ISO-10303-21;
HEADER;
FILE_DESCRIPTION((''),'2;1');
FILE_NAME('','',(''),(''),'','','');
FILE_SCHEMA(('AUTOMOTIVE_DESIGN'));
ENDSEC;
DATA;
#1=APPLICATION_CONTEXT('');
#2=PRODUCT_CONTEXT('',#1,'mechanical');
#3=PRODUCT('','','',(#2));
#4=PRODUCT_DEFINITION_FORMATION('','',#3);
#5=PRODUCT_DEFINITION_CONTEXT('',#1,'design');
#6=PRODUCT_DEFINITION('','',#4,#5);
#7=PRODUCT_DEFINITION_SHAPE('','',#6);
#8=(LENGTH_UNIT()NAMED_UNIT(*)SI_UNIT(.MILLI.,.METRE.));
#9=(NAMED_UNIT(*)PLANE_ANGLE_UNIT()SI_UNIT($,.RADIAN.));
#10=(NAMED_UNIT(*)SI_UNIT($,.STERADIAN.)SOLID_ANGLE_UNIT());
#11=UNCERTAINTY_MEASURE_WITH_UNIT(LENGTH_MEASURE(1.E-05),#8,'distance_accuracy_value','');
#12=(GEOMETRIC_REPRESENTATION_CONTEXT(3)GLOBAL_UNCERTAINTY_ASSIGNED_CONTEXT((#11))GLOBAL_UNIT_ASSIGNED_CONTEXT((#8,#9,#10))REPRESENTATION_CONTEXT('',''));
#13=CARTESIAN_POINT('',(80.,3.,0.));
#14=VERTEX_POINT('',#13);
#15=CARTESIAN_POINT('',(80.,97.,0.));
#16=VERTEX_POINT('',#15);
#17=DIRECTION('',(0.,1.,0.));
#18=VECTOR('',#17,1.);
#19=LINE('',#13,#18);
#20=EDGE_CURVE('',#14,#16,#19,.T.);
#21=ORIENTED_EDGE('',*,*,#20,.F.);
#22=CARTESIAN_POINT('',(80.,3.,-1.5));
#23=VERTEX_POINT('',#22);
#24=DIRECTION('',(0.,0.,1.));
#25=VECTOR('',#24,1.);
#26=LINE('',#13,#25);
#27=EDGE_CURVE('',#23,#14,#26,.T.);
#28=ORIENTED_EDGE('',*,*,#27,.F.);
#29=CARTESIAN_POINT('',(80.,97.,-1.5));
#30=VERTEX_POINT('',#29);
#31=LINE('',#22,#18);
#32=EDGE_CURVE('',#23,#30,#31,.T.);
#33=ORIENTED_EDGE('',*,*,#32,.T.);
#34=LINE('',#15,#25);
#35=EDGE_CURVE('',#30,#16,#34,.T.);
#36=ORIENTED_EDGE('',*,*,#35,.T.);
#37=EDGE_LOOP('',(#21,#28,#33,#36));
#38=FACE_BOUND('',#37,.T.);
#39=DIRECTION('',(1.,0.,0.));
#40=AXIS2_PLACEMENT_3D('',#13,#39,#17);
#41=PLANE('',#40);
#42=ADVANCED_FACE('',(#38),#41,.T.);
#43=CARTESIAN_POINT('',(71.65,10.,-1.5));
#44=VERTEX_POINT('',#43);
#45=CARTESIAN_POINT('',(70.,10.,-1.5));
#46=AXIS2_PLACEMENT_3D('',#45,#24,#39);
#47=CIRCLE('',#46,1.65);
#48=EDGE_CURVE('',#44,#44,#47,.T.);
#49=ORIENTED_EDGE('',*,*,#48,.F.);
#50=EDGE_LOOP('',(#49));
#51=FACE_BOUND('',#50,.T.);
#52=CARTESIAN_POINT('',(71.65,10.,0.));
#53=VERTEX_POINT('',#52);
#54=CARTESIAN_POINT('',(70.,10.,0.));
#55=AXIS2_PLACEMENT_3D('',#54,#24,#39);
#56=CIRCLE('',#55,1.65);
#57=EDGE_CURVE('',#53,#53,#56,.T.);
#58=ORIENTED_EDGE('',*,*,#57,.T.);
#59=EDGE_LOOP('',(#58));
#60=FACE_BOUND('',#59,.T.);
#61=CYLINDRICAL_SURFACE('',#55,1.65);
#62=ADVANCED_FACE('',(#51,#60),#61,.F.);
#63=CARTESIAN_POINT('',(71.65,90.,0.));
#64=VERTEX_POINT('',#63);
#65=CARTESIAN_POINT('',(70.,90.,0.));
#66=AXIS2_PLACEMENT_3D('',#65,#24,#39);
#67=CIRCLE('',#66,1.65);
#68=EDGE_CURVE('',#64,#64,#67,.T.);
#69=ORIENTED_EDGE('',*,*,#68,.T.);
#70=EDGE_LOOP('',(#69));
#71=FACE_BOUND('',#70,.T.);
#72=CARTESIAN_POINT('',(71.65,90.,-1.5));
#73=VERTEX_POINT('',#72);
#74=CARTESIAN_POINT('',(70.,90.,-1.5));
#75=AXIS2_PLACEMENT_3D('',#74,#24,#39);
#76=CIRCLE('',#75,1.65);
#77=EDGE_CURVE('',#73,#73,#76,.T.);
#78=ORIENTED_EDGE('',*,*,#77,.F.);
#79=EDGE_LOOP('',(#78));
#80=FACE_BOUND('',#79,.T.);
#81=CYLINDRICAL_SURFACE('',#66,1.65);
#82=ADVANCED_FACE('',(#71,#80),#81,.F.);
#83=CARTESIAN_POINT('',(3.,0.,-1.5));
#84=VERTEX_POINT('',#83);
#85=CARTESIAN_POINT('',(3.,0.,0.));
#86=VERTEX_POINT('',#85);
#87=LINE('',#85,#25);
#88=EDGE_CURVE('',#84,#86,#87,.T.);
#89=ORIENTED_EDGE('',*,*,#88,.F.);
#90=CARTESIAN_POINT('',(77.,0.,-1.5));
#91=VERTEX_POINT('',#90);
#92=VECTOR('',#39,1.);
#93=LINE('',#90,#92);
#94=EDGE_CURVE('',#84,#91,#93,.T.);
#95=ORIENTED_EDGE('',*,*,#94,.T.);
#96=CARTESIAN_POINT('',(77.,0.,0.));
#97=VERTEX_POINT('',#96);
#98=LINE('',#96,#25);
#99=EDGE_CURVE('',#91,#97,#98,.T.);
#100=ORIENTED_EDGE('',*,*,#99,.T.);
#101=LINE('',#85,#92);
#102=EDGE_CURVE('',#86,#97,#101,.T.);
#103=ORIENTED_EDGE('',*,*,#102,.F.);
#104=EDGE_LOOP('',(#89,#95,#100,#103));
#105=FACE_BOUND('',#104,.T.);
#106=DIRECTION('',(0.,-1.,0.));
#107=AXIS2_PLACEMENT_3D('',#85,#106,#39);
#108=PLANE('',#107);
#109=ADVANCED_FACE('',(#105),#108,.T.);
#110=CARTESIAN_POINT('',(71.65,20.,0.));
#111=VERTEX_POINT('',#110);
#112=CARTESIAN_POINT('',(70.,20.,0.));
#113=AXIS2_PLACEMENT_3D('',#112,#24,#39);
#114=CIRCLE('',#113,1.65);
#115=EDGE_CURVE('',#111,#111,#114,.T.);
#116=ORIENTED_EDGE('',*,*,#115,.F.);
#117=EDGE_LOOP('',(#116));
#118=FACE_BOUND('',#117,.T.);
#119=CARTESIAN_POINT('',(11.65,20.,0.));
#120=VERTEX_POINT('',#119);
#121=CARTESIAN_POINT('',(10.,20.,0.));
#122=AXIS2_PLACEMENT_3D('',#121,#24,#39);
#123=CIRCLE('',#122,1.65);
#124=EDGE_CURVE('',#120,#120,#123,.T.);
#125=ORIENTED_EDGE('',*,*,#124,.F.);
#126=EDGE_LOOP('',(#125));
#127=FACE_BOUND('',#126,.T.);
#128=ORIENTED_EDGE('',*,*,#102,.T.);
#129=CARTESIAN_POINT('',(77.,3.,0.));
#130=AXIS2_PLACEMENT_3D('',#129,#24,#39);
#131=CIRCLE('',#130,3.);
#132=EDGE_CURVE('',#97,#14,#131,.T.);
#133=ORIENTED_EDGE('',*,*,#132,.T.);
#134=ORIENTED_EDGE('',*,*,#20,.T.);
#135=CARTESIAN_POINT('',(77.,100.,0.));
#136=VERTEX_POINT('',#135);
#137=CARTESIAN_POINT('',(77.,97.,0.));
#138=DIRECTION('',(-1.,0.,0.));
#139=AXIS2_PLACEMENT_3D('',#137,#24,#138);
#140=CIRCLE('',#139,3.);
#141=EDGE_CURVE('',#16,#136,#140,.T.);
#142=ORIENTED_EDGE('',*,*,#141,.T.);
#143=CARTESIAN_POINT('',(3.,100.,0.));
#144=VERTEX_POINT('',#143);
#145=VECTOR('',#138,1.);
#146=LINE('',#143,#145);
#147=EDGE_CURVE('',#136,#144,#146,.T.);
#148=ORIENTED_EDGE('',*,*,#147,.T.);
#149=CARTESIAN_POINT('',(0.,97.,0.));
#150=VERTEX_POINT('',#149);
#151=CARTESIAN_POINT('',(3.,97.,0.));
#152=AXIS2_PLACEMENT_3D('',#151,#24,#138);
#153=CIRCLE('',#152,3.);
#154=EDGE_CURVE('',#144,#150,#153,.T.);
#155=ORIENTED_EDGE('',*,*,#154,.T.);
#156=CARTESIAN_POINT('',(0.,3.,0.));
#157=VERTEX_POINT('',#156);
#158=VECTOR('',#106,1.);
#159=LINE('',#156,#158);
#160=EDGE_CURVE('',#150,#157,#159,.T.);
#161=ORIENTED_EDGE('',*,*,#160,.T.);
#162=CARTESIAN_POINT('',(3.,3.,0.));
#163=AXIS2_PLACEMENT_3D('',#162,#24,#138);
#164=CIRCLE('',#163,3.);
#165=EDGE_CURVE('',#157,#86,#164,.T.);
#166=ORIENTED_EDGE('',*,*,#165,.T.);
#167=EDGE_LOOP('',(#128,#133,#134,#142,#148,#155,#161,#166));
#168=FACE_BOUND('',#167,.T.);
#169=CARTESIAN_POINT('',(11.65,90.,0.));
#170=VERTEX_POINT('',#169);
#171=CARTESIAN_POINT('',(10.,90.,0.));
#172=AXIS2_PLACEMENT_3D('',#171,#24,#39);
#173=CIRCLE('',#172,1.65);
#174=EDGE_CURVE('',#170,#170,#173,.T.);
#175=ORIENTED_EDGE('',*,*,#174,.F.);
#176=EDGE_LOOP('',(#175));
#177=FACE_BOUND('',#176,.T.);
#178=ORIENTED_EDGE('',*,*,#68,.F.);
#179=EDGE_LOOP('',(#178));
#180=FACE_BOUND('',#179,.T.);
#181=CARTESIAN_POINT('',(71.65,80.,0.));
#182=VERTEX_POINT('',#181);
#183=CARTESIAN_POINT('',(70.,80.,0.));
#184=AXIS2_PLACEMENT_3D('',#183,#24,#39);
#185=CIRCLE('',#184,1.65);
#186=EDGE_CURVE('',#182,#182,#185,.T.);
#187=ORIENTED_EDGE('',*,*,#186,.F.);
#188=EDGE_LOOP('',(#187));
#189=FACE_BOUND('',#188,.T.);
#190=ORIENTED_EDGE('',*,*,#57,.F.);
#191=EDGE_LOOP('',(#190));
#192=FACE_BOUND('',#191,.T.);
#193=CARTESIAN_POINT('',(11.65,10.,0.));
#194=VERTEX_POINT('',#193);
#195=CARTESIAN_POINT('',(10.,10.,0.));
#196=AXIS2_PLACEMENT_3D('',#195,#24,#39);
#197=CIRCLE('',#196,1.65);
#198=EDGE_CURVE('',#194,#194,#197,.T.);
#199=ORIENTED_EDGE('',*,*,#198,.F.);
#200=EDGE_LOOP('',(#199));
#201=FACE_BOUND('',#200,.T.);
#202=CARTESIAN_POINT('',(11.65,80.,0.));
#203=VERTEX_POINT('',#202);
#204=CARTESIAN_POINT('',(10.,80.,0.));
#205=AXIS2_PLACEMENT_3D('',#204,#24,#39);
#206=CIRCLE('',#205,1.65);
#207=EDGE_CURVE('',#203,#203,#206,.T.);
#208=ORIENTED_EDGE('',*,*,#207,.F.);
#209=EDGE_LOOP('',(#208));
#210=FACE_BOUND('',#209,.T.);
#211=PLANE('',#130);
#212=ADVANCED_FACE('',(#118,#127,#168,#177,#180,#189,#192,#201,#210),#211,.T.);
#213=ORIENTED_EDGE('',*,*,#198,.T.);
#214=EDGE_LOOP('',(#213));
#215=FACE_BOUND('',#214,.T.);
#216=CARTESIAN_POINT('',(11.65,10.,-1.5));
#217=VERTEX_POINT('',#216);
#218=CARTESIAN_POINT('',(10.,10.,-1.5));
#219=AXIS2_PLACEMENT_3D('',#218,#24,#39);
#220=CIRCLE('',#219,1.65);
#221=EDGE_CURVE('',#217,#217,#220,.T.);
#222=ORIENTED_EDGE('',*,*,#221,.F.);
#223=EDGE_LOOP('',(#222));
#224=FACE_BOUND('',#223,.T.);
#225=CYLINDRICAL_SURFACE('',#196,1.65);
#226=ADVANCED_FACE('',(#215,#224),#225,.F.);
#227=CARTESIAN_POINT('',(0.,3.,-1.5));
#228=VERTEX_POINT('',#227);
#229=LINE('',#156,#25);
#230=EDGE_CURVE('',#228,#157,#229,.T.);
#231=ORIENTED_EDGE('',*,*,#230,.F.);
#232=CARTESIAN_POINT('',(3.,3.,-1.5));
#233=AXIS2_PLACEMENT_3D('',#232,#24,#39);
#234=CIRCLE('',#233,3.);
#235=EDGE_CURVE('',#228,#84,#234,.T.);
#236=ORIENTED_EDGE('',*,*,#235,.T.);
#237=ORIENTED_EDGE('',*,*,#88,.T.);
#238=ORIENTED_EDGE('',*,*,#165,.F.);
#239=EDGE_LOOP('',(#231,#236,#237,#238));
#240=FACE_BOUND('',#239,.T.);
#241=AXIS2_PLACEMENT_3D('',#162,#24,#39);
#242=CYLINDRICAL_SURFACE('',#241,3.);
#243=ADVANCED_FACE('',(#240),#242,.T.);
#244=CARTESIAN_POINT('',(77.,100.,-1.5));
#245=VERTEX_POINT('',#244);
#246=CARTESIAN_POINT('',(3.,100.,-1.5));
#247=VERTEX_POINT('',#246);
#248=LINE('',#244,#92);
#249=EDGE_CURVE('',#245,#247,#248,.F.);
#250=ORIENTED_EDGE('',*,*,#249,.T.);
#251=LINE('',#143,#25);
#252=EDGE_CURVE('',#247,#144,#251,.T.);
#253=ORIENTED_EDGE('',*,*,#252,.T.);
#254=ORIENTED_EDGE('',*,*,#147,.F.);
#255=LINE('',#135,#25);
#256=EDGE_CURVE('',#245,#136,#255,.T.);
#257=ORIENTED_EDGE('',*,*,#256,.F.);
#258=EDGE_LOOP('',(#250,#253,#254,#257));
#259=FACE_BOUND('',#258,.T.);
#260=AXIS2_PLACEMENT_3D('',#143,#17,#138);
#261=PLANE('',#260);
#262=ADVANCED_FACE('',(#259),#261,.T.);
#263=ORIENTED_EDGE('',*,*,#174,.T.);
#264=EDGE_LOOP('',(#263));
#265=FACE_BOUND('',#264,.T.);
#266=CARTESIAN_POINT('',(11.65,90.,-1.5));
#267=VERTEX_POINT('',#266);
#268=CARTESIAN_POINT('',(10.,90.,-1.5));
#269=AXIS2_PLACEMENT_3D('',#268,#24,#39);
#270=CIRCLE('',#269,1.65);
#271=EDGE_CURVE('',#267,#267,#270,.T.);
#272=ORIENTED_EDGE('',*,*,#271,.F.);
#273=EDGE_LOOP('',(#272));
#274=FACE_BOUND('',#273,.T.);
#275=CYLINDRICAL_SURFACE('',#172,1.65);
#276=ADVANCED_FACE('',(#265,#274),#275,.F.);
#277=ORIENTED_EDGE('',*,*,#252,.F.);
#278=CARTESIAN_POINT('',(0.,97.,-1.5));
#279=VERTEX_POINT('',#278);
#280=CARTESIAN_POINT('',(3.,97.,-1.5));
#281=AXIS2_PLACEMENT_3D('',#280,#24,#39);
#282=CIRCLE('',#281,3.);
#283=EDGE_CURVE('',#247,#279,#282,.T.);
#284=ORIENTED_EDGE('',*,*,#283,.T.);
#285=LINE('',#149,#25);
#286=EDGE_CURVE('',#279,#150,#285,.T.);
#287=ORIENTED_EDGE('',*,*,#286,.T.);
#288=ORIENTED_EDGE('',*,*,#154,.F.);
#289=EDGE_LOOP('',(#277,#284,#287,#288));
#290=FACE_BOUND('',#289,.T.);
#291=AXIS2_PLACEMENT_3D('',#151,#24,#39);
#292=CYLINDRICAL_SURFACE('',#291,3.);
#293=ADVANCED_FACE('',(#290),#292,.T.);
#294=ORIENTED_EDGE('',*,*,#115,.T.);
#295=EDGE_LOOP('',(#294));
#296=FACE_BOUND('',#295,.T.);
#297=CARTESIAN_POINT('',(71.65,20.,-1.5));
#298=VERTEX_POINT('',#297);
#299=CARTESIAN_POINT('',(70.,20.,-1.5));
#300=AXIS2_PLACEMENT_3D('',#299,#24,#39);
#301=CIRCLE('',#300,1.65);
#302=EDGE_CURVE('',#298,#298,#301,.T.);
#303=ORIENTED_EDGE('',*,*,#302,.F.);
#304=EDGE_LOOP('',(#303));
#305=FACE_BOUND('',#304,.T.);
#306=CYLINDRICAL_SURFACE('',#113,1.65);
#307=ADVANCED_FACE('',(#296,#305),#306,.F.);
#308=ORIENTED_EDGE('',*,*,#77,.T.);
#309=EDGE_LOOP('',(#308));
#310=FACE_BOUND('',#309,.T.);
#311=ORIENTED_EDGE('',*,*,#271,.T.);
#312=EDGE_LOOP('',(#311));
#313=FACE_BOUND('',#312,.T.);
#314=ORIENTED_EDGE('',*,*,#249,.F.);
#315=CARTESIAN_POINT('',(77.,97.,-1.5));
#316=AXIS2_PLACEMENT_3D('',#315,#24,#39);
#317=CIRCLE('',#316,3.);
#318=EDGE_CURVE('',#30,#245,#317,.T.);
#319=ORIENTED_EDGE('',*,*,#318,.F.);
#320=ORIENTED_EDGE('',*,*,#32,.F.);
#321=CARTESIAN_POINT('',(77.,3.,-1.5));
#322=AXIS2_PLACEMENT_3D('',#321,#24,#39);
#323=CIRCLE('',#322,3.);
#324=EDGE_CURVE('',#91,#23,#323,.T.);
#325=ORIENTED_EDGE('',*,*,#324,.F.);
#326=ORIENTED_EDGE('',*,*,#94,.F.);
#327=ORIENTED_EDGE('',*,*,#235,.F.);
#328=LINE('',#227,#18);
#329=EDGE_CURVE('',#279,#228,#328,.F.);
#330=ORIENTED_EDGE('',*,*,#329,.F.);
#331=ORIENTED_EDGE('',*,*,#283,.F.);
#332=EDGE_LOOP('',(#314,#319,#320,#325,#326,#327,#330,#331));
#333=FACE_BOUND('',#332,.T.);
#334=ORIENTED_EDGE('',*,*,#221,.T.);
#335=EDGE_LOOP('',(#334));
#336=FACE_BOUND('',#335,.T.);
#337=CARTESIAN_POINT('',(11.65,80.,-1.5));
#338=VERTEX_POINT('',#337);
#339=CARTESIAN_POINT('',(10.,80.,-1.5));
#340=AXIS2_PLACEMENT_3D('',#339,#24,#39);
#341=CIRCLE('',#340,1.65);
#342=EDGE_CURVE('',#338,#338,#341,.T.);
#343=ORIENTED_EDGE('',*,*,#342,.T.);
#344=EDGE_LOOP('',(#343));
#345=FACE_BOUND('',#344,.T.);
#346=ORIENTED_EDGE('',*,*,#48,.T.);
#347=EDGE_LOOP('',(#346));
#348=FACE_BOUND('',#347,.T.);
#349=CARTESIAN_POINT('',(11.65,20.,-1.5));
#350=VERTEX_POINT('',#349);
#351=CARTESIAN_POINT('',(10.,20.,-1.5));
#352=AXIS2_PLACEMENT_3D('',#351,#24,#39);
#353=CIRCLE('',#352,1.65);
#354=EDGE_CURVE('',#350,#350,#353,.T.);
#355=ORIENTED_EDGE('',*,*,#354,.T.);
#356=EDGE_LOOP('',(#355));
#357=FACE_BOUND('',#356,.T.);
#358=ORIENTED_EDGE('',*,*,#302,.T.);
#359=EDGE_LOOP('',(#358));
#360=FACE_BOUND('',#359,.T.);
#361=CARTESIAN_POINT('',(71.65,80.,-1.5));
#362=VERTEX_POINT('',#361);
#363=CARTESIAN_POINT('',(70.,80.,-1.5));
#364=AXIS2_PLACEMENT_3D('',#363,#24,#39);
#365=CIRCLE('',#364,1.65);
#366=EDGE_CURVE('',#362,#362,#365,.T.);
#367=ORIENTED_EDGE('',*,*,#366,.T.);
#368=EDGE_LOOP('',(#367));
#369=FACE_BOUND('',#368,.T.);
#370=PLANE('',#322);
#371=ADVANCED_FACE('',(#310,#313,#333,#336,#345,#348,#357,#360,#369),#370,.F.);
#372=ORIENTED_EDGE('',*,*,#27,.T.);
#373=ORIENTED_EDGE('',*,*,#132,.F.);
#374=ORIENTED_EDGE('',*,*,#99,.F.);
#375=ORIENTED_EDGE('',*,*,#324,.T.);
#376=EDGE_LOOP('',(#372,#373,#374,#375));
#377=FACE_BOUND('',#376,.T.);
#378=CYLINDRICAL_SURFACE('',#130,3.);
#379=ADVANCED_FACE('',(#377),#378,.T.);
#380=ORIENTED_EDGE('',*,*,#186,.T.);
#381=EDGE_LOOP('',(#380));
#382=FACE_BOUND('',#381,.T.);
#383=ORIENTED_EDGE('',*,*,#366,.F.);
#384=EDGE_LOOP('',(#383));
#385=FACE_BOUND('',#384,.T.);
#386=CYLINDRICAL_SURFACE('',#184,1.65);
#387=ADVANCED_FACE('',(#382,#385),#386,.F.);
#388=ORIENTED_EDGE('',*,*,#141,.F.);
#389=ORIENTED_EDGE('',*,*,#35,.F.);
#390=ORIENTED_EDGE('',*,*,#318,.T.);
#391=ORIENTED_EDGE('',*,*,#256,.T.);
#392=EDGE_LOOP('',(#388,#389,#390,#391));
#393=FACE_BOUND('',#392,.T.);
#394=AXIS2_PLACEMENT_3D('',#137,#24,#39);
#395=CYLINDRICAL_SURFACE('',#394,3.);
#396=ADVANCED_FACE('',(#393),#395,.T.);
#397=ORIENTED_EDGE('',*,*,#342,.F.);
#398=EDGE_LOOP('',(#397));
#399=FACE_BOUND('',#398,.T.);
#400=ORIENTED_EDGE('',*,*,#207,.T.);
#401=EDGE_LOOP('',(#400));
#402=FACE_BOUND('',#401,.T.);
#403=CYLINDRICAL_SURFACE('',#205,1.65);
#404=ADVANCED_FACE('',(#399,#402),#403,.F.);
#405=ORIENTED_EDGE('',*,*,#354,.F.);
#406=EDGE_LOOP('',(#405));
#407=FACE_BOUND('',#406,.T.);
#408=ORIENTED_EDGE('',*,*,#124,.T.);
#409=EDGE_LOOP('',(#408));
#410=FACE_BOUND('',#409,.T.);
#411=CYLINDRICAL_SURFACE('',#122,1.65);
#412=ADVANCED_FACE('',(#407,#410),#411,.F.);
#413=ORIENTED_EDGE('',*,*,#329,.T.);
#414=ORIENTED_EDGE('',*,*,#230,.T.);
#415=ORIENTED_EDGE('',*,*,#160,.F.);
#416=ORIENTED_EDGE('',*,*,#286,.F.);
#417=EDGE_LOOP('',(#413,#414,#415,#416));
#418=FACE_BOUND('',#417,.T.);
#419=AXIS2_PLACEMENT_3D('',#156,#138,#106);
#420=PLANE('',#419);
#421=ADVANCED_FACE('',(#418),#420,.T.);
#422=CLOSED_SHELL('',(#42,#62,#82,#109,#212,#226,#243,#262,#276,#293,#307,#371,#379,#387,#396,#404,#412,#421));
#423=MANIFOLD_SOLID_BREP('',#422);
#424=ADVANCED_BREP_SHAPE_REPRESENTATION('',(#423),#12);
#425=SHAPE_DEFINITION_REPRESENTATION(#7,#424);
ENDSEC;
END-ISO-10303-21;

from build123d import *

# Parameters (mm, degrees)
CONVERT_SOLID1_START     = -1.5
CONVERT_SOLID1_OUTLINE_R = 1.65
CONVERT_SOLID1_DEPTH     = 1.5


# Read off the part's stored shape, not the designer's step: Convert-Solid1
with BuildPart() as part:
    # Convert-Solid1 outline → Convert-Solid1 (new body)
    with BuildSketch(Plane.XY.offset(CONVERT_SOLID1_START)):
        with BuildLine():
            Line((80, 3), (80, 97))
            ThreePointArc((80, 97), (79.121320344, 99.121320344), (77, 100))
            Line((77, 100), (3, 100))
            ThreePointArc((3, 100), (0.878679656, 99.121320344), (0, 97))
            Line((0, 97), (0, 3))
            ThreePointArc((0, 3), (0.878679656, 0.878679656), (3, 0))
            Line((3, 0), (77, 0))
            ThreePointArc((77, 0), (79.121320344, 0.878679656), (80, 3))
        make_face()
        with Locations((10, 10)):
            Circle(CONVERT_SOLID1_OUTLINE_R, mode=Mode.SUBTRACT)
        with Locations((10, 20)):
            Circle(CONVERT_SOLID1_OUTLINE_R, mode=Mode.SUBTRACT)
        with Locations((70, 10)):
            Circle(CONVERT_SOLID1_OUTLINE_R, mode=Mode.SUBTRACT)
        with Locations((70, 20)):
            Circle(CONVERT_SOLID1_OUTLINE_R, mode=Mode.SUBTRACT)
        with Locations((10, 80)):
            Circle(CONVERT_SOLID1_OUTLINE_R, mode=Mode.SUBTRACT)
        with Locations((10, 90)):
            Circle(CONVERT_SOLID1_OUTLINE_R, mode=Mode.SUBTRACT)
        with Locations((70, 80)):
            Circle(CONVERT_SOLID1_OUTLINE_R, mode=Mode.SUBTRACT)
        with Locations((70, 90)):
            Circle(CONVERT_SOLID1_OUTLINE_R, mode=Mode.SUBTRACT)
    extrude(amount=CONVERT_SOLID1_DEPTH)


solid = part.part
